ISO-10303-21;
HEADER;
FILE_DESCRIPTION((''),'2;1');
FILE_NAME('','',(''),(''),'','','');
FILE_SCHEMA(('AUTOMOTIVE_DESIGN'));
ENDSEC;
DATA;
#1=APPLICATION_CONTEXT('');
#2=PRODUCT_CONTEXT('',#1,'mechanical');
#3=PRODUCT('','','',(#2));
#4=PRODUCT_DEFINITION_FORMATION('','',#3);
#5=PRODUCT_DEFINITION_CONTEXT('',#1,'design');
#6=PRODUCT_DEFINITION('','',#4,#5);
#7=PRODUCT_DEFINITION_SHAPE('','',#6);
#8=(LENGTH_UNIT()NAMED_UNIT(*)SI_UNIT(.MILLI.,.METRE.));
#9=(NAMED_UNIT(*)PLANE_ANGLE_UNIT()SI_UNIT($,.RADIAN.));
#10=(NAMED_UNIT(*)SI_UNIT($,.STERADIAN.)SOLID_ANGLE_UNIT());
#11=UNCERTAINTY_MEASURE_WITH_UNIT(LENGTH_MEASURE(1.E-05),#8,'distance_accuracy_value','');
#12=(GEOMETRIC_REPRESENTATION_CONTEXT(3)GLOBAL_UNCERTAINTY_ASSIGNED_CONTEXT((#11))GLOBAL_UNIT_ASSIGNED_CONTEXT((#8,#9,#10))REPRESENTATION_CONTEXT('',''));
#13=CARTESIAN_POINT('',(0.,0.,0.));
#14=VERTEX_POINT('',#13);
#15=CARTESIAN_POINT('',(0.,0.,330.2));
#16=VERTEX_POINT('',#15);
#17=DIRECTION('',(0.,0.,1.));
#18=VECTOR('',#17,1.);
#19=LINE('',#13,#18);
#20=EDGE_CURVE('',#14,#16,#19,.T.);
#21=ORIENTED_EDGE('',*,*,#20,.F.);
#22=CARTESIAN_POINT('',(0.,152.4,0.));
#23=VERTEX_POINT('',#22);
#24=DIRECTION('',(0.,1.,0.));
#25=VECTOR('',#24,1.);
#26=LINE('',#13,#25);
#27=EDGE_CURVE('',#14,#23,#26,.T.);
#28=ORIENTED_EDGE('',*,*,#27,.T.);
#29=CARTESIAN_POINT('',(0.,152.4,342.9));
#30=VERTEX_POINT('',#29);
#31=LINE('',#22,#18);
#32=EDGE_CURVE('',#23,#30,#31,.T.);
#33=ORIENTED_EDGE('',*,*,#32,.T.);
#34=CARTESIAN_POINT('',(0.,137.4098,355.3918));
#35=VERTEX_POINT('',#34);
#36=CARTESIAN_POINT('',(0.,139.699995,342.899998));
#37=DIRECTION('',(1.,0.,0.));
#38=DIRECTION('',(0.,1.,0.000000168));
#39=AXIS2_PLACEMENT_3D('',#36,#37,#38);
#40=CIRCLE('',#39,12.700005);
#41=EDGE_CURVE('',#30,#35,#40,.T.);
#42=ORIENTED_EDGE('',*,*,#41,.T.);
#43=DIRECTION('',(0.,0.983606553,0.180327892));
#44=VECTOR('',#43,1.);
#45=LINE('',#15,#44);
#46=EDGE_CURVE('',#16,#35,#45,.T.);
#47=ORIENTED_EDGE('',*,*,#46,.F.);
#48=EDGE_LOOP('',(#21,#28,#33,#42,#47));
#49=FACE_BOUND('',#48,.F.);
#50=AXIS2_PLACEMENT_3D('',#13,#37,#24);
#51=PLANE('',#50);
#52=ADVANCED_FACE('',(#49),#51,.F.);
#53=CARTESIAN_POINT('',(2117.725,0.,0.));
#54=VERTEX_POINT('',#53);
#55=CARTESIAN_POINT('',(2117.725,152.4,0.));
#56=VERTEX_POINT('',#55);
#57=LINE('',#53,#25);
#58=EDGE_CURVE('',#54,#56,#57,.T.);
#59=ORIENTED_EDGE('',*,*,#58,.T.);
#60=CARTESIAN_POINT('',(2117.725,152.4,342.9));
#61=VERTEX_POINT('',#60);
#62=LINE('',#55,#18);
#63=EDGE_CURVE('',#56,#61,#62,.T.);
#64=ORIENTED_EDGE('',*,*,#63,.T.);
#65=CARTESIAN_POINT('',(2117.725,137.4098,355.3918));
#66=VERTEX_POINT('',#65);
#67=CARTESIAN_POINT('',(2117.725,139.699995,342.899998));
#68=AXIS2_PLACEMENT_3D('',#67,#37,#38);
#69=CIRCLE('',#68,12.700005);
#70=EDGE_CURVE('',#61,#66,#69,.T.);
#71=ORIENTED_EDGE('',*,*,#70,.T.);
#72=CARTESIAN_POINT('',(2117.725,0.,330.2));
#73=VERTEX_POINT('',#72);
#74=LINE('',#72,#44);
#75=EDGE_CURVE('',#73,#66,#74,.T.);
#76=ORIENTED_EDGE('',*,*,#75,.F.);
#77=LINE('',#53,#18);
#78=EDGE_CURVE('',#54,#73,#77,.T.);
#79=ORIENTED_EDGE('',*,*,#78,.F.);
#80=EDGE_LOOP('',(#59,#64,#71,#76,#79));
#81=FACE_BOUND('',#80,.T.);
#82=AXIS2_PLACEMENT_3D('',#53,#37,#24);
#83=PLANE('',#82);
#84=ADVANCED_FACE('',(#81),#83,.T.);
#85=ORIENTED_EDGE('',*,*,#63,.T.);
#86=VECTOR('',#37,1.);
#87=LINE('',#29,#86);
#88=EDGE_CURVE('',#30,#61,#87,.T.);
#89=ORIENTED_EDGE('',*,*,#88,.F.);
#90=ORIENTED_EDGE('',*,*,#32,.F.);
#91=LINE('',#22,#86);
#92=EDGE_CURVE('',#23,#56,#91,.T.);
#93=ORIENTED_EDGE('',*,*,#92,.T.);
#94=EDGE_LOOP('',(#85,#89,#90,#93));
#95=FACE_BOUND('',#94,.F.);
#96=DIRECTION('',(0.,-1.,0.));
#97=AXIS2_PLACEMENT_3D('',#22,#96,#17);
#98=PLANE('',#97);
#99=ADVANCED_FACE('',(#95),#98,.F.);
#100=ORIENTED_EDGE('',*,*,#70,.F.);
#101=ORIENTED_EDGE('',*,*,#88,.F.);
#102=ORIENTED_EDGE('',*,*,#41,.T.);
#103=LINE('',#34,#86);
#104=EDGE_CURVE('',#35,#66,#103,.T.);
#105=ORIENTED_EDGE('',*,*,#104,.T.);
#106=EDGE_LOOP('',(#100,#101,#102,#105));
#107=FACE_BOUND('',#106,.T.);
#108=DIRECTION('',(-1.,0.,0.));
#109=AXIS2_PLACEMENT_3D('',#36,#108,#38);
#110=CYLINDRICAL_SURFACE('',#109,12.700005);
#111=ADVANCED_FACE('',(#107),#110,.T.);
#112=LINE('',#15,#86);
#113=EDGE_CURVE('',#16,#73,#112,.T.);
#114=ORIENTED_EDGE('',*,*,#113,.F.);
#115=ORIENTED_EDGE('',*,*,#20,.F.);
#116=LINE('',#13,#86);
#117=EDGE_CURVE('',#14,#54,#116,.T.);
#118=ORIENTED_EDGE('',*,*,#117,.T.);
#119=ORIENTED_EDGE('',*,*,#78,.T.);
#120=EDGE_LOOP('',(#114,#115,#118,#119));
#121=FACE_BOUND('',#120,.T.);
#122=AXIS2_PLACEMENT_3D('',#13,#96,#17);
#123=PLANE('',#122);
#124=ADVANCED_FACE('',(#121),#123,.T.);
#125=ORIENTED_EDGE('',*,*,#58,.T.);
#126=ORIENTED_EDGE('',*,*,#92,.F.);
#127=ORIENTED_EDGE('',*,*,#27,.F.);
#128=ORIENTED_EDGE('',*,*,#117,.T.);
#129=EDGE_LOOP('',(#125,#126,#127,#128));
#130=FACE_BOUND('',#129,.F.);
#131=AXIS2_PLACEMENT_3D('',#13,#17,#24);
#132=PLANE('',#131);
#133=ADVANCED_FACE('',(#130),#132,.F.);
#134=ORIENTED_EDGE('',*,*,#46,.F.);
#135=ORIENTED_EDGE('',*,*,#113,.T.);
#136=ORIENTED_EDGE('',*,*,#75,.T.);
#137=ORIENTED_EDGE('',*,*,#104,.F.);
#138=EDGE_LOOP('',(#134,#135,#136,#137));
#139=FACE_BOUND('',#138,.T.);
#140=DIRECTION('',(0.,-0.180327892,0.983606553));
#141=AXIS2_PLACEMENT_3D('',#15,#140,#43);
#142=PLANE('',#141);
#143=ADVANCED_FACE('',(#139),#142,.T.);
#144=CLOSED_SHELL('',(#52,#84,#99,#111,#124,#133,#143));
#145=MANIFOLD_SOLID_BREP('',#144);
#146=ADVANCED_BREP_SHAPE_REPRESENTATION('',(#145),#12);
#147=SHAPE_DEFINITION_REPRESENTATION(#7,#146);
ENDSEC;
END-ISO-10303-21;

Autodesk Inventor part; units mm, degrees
ref_plane "YZ Plane" through (0, 0, 0) normal (1, 0, 0) x (0, 1, 0)
ref_plane "XZ Plane" through (0, 0, 0) normal (0, 1, 0) x (-1, 0, 0)
ref_plane "XY Plane" through (0, 0, 0) normal (0, 0, 1) x (1, 0, 0)
sketch "Profile" plane through (0, 0, 0) normal (0, 0, 1) x (1, 0, 0)
  line L0 (0, 0) -> (0, 330.2)
  line L1 (0, 0) -> (152.4, 0)
  line L2 (152.4, 0) -> (152.4, 342.9)
  line L3 (152.4, 342.9) -> (139.7, 342.9) construction
  line L4 (152.4, 342.9) -> (139.7, 342.9) construction
  arc A0 (152.4, 342.9) -> (137.4098, 355.3918) centre (139.7, 342.9) ccw
  line L5 (0, 330.2) -> (137.4098, 355.3918)
  dimension "d0" = 330.2
  dimension "d1" = 152.4
  dimension "d2" = 342.9
  dimension "d3" = 12.7
  dimension "d4" = 12.7
sketch "Sketch1" plane through (0, 0, 0) normal (1, 0, 0) x (0, 1, 0)
  line L0 (0, 0) -> (0, 330.2)
  line L1 (0, 0) -> (152.4, 0)
  line L2 (152.4, 0) -> (152.4, 342.9)
  line L3 (152.4, 342.9) -> (139.7, 342.9) construction
  line L4 (152.4, 342.9) -> (139.7, 342.9) construction
  arc A0 (152.4, 342.9) -> (137.4098, 355.3918) centre (139.7, 342.9) ccw
  line L5 (0, 330.2) -> (137.4098, 355.3918)
extrude "Extrusion1" add sketch "Sketch1" along normal blind 2117.725
properties part number "K" material "Granite, Cut, Polished"
